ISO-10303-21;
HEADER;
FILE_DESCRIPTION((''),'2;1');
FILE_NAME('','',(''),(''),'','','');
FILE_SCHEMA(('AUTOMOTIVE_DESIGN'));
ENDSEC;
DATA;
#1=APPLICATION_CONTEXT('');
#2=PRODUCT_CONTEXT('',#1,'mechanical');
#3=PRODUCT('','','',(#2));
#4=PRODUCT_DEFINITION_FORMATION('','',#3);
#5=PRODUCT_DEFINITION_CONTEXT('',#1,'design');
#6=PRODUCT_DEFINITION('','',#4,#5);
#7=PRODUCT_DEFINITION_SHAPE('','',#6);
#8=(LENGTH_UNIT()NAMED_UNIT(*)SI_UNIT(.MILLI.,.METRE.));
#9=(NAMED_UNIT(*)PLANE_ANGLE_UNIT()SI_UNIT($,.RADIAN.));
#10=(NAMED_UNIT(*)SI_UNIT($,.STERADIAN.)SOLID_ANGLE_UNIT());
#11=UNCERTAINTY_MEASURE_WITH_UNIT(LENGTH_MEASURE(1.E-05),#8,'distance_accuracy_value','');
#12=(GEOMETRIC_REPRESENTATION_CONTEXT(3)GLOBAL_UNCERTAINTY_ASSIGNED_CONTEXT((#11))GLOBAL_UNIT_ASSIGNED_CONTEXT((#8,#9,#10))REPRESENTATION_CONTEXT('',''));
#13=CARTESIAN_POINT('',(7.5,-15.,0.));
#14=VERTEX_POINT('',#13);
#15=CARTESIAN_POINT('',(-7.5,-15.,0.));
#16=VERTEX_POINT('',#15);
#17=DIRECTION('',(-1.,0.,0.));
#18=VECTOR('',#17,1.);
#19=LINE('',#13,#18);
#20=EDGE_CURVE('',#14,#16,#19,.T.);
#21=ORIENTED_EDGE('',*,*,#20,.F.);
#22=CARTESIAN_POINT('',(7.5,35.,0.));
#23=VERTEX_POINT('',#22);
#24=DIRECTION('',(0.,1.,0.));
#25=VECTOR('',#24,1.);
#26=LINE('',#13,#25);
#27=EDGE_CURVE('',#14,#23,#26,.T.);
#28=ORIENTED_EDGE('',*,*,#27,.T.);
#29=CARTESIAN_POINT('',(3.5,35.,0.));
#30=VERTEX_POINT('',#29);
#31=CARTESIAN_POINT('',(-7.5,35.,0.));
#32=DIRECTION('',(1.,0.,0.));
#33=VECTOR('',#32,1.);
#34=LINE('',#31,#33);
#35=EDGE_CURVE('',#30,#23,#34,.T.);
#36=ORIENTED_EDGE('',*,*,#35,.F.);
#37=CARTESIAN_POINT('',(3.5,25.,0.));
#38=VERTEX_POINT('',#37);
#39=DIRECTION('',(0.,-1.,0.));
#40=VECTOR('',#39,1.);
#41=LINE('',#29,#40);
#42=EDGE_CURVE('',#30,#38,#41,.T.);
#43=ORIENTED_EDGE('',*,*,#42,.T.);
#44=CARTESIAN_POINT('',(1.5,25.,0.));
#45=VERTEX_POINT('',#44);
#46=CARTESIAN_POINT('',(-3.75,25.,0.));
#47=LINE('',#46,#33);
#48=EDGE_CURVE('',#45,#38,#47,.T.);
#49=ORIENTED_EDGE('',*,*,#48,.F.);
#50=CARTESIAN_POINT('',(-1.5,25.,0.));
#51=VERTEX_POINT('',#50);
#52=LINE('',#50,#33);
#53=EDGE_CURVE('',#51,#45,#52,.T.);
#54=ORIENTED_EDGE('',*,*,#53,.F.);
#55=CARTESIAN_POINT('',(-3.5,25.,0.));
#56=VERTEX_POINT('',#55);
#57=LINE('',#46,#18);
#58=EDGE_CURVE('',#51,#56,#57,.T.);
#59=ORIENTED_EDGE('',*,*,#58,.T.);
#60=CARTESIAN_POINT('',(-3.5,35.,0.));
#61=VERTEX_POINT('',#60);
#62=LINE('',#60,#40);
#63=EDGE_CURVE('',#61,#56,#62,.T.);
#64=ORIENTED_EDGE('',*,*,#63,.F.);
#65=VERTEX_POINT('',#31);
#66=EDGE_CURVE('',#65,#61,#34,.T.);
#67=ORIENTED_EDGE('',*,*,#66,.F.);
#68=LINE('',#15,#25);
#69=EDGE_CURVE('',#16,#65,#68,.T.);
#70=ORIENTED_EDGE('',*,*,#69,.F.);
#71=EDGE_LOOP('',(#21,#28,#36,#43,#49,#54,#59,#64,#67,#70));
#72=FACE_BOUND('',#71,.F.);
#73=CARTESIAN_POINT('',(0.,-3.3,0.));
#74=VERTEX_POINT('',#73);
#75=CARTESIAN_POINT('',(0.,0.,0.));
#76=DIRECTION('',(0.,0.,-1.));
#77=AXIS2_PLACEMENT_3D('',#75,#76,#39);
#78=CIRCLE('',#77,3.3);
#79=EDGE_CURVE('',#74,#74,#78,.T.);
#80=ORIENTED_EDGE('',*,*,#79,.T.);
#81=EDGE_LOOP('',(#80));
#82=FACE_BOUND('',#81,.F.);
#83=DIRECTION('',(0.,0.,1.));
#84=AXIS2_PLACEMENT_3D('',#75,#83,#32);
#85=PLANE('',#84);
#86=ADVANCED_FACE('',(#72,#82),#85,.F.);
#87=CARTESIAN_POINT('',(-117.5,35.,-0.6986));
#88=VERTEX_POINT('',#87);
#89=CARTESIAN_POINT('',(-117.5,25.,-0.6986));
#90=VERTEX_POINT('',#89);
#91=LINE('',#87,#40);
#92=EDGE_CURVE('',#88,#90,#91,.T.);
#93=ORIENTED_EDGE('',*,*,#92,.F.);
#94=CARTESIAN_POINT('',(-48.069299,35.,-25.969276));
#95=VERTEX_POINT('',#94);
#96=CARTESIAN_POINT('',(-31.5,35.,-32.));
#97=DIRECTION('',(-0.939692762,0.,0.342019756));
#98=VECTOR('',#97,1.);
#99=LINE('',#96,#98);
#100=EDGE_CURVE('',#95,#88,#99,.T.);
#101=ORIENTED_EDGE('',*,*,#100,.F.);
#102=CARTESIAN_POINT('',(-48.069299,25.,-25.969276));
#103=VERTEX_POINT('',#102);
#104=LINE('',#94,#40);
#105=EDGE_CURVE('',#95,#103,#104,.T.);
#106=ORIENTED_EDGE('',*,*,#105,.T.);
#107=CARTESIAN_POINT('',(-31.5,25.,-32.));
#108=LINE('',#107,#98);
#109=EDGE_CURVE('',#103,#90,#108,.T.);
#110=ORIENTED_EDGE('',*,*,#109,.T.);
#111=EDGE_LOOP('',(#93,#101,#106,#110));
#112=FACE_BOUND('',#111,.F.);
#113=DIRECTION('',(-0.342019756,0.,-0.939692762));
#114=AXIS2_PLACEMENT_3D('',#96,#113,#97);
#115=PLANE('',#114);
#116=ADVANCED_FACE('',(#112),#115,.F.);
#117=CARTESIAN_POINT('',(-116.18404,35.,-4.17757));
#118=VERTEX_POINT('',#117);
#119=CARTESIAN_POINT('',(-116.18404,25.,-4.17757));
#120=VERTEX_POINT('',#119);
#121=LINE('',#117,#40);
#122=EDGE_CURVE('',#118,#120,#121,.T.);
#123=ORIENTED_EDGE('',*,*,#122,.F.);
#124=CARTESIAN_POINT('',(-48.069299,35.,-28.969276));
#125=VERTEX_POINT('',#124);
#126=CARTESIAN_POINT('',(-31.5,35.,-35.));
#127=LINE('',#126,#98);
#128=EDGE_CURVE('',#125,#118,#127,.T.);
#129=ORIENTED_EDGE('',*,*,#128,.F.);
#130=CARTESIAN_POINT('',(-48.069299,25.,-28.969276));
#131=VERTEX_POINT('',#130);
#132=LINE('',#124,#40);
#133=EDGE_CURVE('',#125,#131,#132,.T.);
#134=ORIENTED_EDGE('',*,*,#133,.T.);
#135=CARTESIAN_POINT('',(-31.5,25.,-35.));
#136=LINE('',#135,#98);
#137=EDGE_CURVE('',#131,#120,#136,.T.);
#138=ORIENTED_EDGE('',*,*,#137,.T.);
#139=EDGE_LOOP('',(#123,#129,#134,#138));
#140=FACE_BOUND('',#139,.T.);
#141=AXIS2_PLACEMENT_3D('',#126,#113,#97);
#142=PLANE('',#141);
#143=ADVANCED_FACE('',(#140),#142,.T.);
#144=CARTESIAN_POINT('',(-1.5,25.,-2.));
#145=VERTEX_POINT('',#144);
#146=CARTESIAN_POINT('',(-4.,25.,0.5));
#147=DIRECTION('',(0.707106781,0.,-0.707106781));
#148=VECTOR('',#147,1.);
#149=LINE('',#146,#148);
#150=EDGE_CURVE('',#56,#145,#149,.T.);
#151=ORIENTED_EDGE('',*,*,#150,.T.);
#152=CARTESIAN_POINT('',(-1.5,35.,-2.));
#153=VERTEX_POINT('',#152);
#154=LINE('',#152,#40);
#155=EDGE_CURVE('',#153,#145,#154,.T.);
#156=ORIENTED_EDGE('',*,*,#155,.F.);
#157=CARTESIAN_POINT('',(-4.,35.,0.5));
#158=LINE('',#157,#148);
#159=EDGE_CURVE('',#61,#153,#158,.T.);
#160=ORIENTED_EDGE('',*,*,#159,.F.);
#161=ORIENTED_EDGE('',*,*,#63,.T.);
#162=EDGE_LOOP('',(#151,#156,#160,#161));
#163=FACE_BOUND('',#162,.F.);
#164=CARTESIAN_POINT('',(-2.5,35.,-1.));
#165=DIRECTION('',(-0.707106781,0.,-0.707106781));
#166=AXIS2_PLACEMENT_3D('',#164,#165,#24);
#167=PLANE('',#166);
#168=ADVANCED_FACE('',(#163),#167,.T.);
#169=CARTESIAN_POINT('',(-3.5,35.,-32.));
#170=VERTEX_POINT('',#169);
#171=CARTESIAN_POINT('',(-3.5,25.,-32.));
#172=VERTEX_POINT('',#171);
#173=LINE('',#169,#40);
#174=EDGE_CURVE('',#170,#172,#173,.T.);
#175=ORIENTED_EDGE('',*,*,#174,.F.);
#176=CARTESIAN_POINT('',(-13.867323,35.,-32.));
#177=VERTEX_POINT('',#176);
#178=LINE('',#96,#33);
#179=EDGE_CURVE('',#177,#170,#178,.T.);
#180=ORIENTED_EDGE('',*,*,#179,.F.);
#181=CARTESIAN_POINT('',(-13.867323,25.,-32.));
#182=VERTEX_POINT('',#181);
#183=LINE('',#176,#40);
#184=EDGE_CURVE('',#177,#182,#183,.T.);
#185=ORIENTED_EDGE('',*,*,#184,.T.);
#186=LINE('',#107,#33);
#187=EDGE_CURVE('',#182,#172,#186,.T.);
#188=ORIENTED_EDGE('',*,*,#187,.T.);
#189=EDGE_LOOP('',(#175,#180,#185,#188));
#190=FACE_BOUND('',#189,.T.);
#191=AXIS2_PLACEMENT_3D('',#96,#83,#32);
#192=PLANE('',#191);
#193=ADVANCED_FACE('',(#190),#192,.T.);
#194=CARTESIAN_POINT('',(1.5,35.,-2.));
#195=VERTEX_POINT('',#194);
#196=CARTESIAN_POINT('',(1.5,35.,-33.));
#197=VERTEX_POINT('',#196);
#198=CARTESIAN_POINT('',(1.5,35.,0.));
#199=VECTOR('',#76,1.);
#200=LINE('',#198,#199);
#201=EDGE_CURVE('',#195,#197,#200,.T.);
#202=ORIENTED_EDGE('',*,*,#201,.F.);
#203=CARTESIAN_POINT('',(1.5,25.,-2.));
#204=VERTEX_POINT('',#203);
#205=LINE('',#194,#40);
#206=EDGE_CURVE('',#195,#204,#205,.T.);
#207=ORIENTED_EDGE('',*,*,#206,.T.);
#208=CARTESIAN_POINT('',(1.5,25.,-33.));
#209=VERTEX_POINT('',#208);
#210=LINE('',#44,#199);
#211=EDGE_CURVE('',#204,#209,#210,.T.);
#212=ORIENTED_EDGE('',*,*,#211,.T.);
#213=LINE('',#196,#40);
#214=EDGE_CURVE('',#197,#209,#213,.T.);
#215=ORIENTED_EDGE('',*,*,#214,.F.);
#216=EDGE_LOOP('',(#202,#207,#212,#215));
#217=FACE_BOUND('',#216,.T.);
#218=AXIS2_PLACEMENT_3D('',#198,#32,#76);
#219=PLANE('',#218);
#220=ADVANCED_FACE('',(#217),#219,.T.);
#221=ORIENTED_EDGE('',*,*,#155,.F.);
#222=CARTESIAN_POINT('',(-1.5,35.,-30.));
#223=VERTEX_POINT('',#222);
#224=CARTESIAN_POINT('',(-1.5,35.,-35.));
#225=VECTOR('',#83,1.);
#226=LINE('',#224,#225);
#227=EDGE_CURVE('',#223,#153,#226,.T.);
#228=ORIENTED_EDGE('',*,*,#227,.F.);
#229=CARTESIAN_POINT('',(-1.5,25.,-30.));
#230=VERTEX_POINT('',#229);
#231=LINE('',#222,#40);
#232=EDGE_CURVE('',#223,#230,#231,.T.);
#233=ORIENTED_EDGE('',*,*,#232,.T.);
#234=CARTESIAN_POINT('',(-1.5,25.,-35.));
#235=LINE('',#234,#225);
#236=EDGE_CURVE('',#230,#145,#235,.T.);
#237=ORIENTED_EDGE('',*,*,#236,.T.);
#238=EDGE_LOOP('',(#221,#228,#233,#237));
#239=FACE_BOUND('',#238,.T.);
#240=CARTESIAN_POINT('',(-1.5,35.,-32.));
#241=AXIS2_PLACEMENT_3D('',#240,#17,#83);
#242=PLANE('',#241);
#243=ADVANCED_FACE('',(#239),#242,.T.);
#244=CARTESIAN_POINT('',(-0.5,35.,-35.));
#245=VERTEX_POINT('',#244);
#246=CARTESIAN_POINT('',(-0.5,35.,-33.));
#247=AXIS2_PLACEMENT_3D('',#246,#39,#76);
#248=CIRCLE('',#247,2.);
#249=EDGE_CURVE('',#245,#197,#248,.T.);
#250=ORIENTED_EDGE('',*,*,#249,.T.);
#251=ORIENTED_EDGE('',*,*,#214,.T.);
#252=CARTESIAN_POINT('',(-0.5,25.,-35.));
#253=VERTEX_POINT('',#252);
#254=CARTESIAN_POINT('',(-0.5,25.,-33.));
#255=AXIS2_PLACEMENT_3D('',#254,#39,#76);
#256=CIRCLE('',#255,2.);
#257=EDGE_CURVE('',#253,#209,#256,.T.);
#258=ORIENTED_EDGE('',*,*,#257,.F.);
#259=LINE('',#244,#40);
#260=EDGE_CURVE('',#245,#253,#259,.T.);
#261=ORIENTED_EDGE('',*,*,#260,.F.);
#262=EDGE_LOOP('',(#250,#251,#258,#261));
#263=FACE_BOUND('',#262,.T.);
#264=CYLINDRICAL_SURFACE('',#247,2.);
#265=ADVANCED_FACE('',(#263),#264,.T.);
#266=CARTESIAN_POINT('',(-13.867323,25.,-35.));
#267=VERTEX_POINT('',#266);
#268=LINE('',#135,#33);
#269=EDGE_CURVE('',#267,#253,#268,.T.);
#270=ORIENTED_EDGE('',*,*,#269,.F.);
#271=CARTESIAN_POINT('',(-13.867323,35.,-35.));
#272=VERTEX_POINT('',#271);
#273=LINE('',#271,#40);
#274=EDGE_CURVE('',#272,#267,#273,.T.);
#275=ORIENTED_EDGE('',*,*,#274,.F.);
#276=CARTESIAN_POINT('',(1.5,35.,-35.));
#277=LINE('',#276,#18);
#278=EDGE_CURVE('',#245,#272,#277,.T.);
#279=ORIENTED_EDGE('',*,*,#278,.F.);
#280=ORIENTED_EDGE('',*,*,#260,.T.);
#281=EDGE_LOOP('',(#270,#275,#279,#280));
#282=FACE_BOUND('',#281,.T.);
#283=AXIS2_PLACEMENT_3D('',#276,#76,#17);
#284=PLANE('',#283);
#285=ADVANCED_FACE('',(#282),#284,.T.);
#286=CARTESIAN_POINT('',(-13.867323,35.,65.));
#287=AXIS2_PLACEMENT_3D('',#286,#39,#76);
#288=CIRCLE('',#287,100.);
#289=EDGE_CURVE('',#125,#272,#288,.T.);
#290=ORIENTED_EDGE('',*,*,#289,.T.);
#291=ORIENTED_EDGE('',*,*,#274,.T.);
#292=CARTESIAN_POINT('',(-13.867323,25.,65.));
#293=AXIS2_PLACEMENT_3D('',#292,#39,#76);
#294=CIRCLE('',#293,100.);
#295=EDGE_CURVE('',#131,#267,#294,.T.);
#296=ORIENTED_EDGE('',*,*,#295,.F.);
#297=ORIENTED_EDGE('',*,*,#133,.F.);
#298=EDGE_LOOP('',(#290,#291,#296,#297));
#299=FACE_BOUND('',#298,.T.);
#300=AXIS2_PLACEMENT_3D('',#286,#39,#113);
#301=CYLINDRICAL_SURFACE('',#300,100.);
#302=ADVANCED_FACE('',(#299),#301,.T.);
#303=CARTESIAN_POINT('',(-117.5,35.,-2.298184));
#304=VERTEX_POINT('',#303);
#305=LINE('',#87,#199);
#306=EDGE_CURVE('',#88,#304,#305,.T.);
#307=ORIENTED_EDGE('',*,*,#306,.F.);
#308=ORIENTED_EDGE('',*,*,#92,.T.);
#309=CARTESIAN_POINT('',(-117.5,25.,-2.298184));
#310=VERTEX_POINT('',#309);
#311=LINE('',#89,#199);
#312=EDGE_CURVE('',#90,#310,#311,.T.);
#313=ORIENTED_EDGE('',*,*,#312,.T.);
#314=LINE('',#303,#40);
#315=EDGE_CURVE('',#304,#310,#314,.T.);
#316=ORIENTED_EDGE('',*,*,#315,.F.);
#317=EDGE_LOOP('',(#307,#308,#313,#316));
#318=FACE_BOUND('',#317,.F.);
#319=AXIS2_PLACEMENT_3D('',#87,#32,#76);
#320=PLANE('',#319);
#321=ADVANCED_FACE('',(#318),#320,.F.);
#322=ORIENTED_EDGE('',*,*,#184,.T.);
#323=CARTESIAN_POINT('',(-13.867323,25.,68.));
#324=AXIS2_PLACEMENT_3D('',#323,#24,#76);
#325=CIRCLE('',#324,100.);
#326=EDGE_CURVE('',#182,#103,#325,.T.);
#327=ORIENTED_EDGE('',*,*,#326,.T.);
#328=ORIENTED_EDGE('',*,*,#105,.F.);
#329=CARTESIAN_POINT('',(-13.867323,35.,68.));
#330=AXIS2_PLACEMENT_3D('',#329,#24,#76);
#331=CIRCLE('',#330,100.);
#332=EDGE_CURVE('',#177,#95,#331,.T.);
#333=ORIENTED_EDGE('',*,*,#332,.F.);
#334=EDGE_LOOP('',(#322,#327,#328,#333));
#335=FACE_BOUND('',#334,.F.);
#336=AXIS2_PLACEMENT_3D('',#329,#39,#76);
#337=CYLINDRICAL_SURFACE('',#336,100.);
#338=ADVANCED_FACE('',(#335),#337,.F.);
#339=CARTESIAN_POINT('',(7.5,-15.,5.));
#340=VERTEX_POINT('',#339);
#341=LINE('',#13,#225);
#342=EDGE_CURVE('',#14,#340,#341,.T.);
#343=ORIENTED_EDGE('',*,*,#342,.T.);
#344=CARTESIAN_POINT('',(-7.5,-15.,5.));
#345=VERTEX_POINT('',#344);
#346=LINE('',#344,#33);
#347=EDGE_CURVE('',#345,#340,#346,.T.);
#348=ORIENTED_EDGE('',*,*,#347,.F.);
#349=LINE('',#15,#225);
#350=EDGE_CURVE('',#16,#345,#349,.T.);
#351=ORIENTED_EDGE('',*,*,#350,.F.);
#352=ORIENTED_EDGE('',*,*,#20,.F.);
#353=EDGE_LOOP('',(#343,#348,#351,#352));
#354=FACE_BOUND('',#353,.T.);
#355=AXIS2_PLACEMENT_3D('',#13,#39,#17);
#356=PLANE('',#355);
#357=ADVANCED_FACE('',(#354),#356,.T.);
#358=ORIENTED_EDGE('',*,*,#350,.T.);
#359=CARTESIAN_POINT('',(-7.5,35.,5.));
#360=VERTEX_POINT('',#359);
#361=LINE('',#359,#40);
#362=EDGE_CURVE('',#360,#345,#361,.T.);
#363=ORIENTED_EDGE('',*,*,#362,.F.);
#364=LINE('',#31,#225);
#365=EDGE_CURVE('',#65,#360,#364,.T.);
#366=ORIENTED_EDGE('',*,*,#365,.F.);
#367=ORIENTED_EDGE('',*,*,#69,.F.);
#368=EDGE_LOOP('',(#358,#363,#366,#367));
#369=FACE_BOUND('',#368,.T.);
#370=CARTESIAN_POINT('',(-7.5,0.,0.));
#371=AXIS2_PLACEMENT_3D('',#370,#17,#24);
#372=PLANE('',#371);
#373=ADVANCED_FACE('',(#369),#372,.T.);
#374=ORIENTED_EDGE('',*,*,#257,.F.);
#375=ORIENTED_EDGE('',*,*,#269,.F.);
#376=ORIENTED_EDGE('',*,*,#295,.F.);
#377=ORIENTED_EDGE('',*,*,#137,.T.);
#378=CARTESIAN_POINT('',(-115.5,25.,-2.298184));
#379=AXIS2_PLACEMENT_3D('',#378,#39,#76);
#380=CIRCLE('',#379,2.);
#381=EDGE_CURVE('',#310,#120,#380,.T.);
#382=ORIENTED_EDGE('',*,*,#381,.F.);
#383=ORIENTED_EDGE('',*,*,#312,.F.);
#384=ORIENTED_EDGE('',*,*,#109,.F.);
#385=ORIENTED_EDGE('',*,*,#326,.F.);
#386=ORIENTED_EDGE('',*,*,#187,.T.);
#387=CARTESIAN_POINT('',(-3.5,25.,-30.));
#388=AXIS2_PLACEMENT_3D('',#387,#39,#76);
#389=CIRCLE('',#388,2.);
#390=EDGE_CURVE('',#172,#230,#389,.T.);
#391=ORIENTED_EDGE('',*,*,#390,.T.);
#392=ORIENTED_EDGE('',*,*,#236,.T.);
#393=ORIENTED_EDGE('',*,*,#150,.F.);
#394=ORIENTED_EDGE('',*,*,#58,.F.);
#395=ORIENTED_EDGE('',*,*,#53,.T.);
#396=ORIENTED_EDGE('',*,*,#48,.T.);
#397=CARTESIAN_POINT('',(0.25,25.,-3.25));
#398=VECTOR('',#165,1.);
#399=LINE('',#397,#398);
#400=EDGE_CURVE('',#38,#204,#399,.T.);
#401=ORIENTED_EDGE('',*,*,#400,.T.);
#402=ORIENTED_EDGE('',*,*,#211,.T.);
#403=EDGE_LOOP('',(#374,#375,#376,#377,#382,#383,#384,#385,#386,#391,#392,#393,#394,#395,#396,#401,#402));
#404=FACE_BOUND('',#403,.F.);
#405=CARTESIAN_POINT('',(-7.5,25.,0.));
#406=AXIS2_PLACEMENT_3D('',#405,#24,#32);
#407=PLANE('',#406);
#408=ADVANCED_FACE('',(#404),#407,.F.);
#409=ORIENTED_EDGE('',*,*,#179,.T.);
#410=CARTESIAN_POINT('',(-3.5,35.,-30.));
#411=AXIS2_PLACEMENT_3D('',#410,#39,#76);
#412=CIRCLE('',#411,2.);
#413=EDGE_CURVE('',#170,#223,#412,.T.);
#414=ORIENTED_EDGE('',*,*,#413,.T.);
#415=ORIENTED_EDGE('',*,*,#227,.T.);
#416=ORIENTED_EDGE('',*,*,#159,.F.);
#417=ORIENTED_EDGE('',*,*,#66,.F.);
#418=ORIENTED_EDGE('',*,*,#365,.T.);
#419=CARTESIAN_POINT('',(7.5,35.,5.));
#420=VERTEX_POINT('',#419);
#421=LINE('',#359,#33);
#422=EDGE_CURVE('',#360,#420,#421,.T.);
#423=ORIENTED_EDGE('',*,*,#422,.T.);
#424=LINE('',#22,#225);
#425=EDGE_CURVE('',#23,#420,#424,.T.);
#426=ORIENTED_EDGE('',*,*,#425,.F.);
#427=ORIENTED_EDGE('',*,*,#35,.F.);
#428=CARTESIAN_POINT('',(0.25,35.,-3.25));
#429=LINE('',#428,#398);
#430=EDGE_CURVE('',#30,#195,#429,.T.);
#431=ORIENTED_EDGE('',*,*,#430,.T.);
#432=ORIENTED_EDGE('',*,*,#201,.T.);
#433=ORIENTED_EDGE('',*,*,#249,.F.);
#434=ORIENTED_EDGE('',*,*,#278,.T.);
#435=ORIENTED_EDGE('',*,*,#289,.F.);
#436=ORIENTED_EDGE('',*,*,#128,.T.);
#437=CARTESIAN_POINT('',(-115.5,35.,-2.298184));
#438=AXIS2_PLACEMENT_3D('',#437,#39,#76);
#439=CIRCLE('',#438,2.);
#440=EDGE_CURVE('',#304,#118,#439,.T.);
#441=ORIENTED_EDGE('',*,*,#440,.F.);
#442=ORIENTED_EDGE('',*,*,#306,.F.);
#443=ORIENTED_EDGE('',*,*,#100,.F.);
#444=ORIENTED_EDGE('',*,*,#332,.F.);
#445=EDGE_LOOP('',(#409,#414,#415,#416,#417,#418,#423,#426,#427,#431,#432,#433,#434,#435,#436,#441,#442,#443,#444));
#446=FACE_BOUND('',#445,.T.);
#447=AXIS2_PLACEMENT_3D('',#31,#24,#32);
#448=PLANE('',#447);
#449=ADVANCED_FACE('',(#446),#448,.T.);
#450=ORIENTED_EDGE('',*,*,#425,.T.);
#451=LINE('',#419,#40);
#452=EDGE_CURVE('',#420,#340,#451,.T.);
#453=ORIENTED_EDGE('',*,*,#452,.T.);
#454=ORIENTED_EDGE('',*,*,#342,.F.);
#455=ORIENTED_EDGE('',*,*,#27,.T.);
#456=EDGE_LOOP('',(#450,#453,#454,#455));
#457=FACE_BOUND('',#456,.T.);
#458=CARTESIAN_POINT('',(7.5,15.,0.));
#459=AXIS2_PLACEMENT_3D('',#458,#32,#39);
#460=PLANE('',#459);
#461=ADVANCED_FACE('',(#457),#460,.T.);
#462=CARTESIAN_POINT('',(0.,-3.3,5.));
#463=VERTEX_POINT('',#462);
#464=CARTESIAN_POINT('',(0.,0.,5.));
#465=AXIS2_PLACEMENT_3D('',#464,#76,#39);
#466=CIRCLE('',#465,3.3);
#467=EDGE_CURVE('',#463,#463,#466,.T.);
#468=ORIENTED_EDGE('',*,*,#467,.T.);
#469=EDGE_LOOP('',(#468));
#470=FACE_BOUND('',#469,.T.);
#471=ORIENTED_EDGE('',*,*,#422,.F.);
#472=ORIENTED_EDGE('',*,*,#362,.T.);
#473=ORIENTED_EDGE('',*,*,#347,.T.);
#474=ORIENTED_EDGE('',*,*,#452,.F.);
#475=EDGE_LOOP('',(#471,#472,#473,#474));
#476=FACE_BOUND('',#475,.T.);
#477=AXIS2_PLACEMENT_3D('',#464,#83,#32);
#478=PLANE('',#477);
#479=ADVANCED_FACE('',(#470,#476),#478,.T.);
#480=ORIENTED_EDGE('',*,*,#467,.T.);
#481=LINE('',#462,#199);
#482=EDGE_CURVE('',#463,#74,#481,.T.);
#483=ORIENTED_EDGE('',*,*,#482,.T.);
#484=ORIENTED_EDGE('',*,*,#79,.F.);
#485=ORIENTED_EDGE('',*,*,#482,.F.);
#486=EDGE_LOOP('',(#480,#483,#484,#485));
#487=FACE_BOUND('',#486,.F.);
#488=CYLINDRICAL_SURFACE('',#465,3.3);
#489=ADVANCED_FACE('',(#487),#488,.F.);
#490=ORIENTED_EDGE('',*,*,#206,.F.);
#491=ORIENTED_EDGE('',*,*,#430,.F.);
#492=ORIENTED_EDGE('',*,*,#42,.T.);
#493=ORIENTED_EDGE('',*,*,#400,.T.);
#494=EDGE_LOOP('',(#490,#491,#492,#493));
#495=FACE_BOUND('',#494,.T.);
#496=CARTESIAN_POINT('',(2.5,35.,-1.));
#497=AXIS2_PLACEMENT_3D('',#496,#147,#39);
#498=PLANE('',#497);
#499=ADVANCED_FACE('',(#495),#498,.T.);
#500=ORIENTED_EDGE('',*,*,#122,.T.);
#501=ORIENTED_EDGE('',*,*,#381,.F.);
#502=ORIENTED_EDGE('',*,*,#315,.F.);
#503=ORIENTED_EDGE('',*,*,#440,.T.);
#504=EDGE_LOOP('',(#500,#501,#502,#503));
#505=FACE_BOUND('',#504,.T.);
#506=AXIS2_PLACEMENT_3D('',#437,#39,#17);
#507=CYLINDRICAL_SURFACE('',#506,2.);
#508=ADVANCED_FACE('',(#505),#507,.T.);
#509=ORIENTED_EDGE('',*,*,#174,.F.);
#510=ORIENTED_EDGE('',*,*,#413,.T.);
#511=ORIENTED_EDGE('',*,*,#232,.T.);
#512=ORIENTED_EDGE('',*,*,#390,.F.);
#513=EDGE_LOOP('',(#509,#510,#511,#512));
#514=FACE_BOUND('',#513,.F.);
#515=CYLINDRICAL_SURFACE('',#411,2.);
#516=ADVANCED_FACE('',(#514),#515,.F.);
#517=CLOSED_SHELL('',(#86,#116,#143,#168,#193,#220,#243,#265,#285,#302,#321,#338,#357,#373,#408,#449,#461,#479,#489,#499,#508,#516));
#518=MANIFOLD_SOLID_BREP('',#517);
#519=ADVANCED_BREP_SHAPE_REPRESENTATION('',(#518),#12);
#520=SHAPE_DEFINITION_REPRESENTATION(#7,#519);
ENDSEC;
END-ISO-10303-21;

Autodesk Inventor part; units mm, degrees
ref_plane "YZ Plane" through (0, 0, 0) normal (1, 0, 0) x (0, 1, 0)
ref_plane "XZ Plane" through (0, 0, 0) normal (0, 1, 0) x (-1, 0, 0)
ref_plane "XY Plane" through (0, 0, 0) normal (0, 0, 1) x (1, 0, 0)
sketch "Náčrt1" plane through (0, 0, 0) normal (0, 0, 1) x (1, 0, 0)
  line L0 (0, 21) -> (0, -21) projected
  line L1 (-10.5, 0) -> (10.5, 0) projected
  line L2 (-7.5, 15) -> (7.5, 15)
  line L3 (7.5, 15) -> (7.5, -15)
  line L4 (7.5, -15) -> (-7.5, -15)
  line L5 (-7.5, -15) -> (-7.5, 15)
  point P0 (0, 0)
  dimension "d0" = 15
  dimension "d1" = 30
extrude "Vysunutí1" add sketch "Náčrt1" along normal blind 5
sketch "Náčrt2" plane through (-7.5, 15, 0) normal (0, 1, 0) x (1, 0, 0)
  line L0 (7.5, 1) -> (7.5, -6) projected
  line L1 (18, 0) -> (-3, 0) projected
  line L2 (15, 0) -> (0, 0) projected
  line L3 (0, 0) -> (0, -5) projected
  line L4 (15, -5) -> (0, -5) projected
  line L5 (15, 0) -> (15, -5) projected
  line L6 (15, 0) -> (0, 0) projected
  line L7 (0, 0) -> (15, 0)
  line L8 (15, 0) -> (15, -5)
  line L9 (15, -5) -> (0, -5)
  line L10 (0, -5) -> (0, 0)
  point P0 (7.5, 0)
extrude "Vysunutí2" add sketch "Náčrt2" along normal blind 20
sketch "Náčrt3" plane through (0, 0, 5) normal (0, 0, 1) x (1, 0, 0)
  line L0 (-7.5, -15) -> (7.5, -15) projected
  line L1 (7.5, -15) -> (7.5, 35) projected
  line L2 (-7.5, 35) -> (7.5, 35) projected
  line L3 (-7.5, -15) -> (-7.5, 35) projected
  line L4 (0, 45) -> (0, -25) projected
  line L5 (-10.5, 0) -> (10.5, 0) projected
  point P0 (0, 0)
  point P1 (0, 0)
  dimension "d6" = 15
hole "Díra1" at (0, 0, 5) direction (0, 0, -1) diameter 6.6 end through all
sketch "Náčrt4" plane through (-7.5, 35, 0) normal (0, 1, 0) x (1, 0, 0)
  line L0 (15, -5) -> (15, 0) projected
  line L1 (15, 0) -> (0, 0) projected
  line L2 (0, 0) -> (0, -5) projected
  line L3 (0, -5) -> (15, -5) projected
  line L4 (6, 0) -> (9, 0)
  line L5 (9, 0) -> (9, 35)
  line L6 (9, 35) -> (6, 35)
  line L7 (6, 35) -> (6, 0)
  line L8 (7.5, 43) -> (7.5, -13) projected
  line L9 (6, 35) -> (-24, 35)
  line L10 (-24, 35) -> (-24, 32)
  line L11 (-24, 32) -> (6, 32)
  line L12 (6, 32) -> (6, 35)
  line L13 (-24, 35) -> (-110, 3.6986)
  line L14 (-24, 32) -> (-110, 0.6986)
  line L15 (-110, 0.6986) -> (-110, 3.6986)
  point P0 (7.5, 0)
  point P1 (6, 32)
  dimension "d14" = 3
  dimension "d15" = 35
  dimension "d16" = 3
  dimension "d17" = 30
  dimension "d19" = 160
  dimension "d20" = 110
extrude "Vysunutí3" add sketch "Náčrt4" against normal blind 10 contours L1 L8 L6 L5 | L1 L7 L6 L8 | L11 L10 L9 L7 | L14 L15 L13 L10
chamfer "Zkosení1" distance 2 distance2 2 2 edges at (-1.5, 30, 0) (1.5, 30, 0) measured on face at (-6.092, 6.7993, 0)
fillet "Zaoblení2" radius 2 1 edges at (-117.5, 30, -3.6986)
fillet "Zaoblení3" radius 2 2 edges at (1.5, 30, -35) (-1.5, 30, -32)
fillet "Zaoblení4" radius 100 2 edges at (-31.5, 30, -32) (-31.5, 30, -35)
properties part number "srovnavac_3D tisk"
